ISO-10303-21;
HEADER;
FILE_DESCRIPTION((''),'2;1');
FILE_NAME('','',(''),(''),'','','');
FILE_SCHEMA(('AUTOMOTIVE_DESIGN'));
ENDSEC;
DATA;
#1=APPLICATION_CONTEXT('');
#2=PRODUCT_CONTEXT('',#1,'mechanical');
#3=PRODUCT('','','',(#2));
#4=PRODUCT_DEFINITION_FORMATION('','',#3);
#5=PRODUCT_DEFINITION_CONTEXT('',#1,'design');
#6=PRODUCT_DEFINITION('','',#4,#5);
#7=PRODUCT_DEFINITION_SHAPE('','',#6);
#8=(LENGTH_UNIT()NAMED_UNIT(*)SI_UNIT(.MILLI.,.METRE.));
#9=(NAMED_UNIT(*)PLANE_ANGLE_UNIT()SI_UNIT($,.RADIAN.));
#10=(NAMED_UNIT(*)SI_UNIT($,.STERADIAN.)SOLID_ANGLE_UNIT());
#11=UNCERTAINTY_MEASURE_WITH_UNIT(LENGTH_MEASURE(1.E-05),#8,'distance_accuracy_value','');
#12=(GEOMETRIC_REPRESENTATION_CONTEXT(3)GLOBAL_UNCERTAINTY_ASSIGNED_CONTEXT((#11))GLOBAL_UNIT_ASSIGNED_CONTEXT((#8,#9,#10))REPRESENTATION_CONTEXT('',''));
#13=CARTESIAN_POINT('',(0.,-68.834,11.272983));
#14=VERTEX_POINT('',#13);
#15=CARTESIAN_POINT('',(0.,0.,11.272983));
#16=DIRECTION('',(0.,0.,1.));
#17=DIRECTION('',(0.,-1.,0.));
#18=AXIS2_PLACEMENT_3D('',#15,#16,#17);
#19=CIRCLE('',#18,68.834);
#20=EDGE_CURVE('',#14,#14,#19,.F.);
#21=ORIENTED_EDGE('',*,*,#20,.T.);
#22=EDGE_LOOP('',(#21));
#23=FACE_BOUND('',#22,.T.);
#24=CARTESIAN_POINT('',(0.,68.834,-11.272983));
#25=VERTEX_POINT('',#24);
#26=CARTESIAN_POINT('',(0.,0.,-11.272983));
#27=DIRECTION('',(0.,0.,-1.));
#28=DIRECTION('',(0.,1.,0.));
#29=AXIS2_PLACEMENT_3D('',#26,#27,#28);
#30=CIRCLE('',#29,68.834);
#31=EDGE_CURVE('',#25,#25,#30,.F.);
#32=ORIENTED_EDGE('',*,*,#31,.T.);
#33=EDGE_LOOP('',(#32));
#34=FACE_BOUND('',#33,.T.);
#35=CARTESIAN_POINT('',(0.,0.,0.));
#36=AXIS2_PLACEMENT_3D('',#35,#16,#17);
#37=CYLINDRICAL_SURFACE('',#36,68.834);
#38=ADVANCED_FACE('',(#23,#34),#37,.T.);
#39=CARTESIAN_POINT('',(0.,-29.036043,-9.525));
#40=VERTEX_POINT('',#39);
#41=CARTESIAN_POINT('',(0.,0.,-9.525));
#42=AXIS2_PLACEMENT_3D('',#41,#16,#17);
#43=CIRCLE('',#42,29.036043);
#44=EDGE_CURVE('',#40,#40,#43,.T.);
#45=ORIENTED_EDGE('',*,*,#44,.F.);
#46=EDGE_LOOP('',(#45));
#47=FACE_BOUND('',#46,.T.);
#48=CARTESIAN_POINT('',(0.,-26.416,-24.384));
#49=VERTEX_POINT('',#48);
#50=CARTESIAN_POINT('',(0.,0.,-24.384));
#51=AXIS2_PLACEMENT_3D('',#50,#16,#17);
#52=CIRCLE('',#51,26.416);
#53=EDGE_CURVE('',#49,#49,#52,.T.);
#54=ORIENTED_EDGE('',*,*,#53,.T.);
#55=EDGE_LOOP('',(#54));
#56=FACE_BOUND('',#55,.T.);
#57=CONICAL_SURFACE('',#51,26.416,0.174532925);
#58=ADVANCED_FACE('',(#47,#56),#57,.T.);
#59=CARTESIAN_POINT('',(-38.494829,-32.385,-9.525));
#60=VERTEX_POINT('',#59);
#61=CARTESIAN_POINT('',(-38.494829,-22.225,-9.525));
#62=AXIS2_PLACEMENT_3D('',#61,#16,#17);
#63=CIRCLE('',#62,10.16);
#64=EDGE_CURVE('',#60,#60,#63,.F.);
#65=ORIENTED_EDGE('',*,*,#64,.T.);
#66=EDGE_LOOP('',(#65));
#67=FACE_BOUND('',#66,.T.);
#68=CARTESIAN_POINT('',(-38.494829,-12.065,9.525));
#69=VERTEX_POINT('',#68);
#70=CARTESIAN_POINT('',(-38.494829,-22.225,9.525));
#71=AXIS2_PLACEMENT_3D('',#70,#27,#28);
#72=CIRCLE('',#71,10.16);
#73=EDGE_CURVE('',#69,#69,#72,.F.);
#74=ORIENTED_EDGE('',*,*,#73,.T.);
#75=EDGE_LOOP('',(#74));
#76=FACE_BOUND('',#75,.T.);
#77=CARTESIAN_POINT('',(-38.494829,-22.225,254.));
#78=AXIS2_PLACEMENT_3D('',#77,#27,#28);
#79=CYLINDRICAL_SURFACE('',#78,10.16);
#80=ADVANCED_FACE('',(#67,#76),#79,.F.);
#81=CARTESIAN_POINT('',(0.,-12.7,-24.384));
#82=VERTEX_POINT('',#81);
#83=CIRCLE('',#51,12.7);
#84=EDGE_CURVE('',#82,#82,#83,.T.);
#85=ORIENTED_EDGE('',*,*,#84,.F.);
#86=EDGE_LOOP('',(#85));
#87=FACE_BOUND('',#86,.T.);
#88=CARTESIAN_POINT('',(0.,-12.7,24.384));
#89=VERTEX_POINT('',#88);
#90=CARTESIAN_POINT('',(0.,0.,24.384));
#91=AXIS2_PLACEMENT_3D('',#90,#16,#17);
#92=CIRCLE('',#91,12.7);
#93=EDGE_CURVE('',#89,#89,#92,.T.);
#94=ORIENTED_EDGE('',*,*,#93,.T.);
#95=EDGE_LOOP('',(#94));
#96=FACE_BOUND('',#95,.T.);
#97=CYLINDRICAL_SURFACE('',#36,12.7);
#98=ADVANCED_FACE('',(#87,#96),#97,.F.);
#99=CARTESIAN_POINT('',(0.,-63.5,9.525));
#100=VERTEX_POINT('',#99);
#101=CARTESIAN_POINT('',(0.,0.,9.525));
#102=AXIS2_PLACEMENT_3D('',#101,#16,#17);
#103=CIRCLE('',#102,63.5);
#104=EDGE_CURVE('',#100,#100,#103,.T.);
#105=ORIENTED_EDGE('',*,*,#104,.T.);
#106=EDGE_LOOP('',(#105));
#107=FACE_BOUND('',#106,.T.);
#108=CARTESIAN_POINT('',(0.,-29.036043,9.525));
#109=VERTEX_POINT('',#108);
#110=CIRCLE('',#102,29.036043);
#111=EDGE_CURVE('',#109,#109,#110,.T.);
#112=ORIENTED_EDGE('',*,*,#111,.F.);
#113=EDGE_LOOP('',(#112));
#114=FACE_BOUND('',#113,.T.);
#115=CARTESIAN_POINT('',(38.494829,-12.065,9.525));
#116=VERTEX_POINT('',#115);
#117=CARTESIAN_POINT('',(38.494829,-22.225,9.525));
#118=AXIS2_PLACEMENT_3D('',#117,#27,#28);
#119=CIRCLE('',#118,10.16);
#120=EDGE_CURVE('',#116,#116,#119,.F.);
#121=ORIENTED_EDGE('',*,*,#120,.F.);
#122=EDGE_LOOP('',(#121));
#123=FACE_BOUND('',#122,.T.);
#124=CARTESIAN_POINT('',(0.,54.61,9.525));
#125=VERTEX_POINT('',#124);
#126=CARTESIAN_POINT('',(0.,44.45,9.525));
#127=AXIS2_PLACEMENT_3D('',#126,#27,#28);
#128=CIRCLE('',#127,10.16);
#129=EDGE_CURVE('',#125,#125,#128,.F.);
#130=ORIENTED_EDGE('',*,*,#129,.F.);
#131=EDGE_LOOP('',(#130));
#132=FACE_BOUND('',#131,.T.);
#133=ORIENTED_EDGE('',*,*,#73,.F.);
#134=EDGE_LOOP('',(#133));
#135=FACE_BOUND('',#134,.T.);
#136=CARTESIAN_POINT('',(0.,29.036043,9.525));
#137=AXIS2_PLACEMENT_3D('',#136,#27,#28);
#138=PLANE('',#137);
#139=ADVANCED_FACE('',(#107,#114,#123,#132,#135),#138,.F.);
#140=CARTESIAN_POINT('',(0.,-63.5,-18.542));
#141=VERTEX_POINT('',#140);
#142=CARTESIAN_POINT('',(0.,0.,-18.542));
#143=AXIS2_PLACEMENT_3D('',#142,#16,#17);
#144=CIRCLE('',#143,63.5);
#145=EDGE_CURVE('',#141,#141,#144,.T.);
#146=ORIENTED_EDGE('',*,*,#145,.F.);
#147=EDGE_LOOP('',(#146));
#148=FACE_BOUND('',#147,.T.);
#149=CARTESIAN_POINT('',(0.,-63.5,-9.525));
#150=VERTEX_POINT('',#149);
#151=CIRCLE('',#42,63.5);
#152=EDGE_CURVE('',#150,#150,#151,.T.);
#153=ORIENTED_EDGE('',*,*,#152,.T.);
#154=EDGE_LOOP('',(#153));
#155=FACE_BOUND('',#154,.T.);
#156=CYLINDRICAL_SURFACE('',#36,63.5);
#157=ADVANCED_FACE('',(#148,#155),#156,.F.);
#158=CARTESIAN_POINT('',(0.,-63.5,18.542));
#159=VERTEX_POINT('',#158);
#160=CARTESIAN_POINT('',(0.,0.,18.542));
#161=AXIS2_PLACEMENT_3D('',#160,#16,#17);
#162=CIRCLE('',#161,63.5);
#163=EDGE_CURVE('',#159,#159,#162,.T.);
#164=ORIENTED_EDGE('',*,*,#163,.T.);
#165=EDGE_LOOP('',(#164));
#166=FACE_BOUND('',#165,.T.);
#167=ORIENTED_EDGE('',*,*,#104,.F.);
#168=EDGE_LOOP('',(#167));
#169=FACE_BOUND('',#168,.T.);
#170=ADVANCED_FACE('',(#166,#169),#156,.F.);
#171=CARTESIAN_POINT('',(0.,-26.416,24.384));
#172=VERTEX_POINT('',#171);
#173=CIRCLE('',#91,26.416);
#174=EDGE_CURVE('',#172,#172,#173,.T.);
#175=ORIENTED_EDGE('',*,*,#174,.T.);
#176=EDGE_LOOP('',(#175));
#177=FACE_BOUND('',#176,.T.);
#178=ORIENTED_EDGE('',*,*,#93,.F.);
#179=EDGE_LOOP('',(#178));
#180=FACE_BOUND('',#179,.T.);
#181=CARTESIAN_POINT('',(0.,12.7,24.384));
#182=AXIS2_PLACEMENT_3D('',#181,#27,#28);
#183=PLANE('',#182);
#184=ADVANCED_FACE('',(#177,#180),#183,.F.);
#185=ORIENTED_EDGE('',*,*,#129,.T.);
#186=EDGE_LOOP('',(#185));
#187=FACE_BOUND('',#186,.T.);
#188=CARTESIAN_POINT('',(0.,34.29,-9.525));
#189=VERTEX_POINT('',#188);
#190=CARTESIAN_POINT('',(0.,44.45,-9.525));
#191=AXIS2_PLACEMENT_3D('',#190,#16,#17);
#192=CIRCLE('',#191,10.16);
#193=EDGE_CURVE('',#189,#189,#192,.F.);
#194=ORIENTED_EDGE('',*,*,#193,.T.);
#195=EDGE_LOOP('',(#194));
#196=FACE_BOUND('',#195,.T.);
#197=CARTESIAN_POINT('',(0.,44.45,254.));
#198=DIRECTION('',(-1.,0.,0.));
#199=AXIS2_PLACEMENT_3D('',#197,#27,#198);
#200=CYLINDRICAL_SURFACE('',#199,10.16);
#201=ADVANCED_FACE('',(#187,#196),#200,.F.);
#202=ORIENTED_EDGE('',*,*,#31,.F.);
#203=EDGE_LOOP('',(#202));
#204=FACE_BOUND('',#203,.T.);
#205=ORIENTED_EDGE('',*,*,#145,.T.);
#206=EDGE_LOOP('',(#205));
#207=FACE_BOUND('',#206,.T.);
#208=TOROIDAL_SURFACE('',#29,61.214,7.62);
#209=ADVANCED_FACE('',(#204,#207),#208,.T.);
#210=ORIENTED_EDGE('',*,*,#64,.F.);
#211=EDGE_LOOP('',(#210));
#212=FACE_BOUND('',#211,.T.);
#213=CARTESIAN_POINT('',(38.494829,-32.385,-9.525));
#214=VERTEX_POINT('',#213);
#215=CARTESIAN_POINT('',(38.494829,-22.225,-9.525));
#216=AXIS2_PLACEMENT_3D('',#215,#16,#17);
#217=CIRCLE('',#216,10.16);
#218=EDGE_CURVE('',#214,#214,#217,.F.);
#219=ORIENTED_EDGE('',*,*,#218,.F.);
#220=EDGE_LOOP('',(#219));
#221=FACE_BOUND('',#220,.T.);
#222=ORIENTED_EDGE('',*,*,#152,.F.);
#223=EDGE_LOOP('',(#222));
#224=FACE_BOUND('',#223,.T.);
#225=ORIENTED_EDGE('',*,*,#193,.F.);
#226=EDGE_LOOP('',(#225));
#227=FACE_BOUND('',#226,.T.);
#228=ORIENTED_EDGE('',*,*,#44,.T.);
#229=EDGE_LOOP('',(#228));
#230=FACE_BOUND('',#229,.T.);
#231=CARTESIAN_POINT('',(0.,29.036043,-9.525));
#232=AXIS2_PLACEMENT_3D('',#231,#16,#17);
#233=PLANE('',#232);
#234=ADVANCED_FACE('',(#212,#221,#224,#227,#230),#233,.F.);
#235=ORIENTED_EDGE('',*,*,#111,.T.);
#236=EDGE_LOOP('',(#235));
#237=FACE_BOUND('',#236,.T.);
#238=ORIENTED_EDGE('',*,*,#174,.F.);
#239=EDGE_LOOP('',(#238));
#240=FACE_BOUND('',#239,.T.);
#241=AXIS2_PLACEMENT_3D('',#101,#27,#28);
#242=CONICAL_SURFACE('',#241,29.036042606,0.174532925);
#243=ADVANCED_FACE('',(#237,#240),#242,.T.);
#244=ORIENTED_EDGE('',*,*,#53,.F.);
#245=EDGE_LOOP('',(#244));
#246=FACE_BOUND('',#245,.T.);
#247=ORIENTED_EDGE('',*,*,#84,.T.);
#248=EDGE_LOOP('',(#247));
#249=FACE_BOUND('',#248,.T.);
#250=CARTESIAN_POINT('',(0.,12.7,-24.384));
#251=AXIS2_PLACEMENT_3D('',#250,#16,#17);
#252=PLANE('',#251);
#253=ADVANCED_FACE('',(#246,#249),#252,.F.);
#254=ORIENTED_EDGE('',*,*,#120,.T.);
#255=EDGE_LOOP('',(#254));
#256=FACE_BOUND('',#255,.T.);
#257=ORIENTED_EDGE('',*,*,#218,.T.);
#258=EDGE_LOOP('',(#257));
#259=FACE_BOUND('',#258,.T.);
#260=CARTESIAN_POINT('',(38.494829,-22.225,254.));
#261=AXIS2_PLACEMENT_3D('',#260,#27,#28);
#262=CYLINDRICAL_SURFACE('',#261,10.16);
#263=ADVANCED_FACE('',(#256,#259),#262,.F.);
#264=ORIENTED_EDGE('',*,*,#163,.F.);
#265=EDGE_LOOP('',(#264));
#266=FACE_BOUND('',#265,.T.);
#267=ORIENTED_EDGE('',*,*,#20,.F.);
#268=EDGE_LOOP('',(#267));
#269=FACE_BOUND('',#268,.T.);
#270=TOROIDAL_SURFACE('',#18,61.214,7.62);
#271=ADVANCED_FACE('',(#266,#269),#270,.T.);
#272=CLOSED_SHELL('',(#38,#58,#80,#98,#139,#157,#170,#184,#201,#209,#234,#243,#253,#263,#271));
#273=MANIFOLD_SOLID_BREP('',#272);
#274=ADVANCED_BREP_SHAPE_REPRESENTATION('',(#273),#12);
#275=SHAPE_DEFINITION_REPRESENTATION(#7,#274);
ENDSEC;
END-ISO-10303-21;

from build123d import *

# Parameters (mm, degrees)
SKETCH2_R          = 10.16
CUT_EXTRUDE2_DEPTH = 254
CIRPATTERN1_COUNT  = 3
FILLET1_R          = 7.62


with BuildPart() as part:
    # Sketch1 → Revolve1 (revolve)
    with BuildSketch(Plane(origin=(0, 0, 0), x_dir=(0, 0, -1), z_dir=(1, 0, 0)), mode=Mode.PRIVATE) as revolve1_sk:
        Polygon((-24.384, 12.7), (-24.384, 26.416), (-9.525, 29.036042606), (-9.525, 63.5), (-18.542, 63.5), (-18.542, 68.834), (18.542, 68.834), (18.542, 63.5), (9.525, 63.5), (9.525, 29.036042606), (24.384, 26.416), (24.384, 12.7), align=None)
    revolve(revolve1_sk.sketch.rotate(Axis((0, 0, 0), (0, 0, -1)), 180), axis=Axis((0, 0, 0), (0, 0, -1)))

    # Sketch2 → Cut-Extrude2 (cut, symmetric)
    with BuildSketch(Plane.XY):
        with Locations(Location((0, 44.45, 0), (0, 0, 90))):
            Circle(SKETCH2_R)
    cut_extrude2 = extrude(amount=CUT_EXTRUDE2_DEPTH, both=True, mode=Mode.SUBTRACT)

    # CirPattern1: Cut-Extrude2 ×3 about axis
    cirpattern1_axis = Axis((0, 0, 0), (0, 0, 1))
    for i in range(1, CIRPATTERN1_COUNT):
        add(cut_extrude2.rotate(cirpattern1_axis, i * 360 / CIRPATTERN1_COUNT), mode=Mode.SUBTRACT)

    # Fillet1
    # the kernel refuses this fillet: 7.62 mm, written as the material it takes off along each edge
    with BuildSketch(Plane(origin=(0, 0, 18.542), x_dir=(0, -1, 0), z_dir=(1, 0, 0))) as fillet1_piece_1:
        with BuildLine():
            CenterArc((61.214, 7.269016715), FILLET1_R, 287.457603124, 72.542396876)
            Line((68.834, 7.269016715), (68.9864, 7.269016715))
            Line((68.9864, 7.269016715), (68.9864, 0))
            Line((68.9864, 0), (68.834, -0.1524))
            ThreePointArc((68.834, -0.1524), (66.167, -0.1524), (63.54572, -0.145380334))
            Line((63.54572, -0.145380334), (63.5, 0))
        make_face()
    revolve(axis=Axis((0, 0, 18.542), (0, 0, -1)), mode=Mode.SUBTRACT)
    with BuildSketch(Plane(origin=(0, 0, -18.542), x_dir=(0, -1, 0), z_dir=(1, 0, 0))) as fillet1_piece_2:
        with BuildLine():
            CenterArc((61.214, -7.269016715), FILLET1_R, 0, 72.542396876)
            Line((63.5, 0), (63.54572, 0.145380334))
            ThreePointArc((63.54572, 0.145380334), (66.167, 0.1524), (68.834, 0.1524))
            Line((68.834, 0.1524), (68.9864, 0))
            Line((68.9864, 0), (68.9864, -7.269016715))
            Line((68.9864, -7.269016715), (68.834, -7.269016715))
        make_face()
    revolve(axis=Axis((0, 0, -18.542), (0, 0, -1)), mode=Mode.SUBTRACT)


solid = part.part
